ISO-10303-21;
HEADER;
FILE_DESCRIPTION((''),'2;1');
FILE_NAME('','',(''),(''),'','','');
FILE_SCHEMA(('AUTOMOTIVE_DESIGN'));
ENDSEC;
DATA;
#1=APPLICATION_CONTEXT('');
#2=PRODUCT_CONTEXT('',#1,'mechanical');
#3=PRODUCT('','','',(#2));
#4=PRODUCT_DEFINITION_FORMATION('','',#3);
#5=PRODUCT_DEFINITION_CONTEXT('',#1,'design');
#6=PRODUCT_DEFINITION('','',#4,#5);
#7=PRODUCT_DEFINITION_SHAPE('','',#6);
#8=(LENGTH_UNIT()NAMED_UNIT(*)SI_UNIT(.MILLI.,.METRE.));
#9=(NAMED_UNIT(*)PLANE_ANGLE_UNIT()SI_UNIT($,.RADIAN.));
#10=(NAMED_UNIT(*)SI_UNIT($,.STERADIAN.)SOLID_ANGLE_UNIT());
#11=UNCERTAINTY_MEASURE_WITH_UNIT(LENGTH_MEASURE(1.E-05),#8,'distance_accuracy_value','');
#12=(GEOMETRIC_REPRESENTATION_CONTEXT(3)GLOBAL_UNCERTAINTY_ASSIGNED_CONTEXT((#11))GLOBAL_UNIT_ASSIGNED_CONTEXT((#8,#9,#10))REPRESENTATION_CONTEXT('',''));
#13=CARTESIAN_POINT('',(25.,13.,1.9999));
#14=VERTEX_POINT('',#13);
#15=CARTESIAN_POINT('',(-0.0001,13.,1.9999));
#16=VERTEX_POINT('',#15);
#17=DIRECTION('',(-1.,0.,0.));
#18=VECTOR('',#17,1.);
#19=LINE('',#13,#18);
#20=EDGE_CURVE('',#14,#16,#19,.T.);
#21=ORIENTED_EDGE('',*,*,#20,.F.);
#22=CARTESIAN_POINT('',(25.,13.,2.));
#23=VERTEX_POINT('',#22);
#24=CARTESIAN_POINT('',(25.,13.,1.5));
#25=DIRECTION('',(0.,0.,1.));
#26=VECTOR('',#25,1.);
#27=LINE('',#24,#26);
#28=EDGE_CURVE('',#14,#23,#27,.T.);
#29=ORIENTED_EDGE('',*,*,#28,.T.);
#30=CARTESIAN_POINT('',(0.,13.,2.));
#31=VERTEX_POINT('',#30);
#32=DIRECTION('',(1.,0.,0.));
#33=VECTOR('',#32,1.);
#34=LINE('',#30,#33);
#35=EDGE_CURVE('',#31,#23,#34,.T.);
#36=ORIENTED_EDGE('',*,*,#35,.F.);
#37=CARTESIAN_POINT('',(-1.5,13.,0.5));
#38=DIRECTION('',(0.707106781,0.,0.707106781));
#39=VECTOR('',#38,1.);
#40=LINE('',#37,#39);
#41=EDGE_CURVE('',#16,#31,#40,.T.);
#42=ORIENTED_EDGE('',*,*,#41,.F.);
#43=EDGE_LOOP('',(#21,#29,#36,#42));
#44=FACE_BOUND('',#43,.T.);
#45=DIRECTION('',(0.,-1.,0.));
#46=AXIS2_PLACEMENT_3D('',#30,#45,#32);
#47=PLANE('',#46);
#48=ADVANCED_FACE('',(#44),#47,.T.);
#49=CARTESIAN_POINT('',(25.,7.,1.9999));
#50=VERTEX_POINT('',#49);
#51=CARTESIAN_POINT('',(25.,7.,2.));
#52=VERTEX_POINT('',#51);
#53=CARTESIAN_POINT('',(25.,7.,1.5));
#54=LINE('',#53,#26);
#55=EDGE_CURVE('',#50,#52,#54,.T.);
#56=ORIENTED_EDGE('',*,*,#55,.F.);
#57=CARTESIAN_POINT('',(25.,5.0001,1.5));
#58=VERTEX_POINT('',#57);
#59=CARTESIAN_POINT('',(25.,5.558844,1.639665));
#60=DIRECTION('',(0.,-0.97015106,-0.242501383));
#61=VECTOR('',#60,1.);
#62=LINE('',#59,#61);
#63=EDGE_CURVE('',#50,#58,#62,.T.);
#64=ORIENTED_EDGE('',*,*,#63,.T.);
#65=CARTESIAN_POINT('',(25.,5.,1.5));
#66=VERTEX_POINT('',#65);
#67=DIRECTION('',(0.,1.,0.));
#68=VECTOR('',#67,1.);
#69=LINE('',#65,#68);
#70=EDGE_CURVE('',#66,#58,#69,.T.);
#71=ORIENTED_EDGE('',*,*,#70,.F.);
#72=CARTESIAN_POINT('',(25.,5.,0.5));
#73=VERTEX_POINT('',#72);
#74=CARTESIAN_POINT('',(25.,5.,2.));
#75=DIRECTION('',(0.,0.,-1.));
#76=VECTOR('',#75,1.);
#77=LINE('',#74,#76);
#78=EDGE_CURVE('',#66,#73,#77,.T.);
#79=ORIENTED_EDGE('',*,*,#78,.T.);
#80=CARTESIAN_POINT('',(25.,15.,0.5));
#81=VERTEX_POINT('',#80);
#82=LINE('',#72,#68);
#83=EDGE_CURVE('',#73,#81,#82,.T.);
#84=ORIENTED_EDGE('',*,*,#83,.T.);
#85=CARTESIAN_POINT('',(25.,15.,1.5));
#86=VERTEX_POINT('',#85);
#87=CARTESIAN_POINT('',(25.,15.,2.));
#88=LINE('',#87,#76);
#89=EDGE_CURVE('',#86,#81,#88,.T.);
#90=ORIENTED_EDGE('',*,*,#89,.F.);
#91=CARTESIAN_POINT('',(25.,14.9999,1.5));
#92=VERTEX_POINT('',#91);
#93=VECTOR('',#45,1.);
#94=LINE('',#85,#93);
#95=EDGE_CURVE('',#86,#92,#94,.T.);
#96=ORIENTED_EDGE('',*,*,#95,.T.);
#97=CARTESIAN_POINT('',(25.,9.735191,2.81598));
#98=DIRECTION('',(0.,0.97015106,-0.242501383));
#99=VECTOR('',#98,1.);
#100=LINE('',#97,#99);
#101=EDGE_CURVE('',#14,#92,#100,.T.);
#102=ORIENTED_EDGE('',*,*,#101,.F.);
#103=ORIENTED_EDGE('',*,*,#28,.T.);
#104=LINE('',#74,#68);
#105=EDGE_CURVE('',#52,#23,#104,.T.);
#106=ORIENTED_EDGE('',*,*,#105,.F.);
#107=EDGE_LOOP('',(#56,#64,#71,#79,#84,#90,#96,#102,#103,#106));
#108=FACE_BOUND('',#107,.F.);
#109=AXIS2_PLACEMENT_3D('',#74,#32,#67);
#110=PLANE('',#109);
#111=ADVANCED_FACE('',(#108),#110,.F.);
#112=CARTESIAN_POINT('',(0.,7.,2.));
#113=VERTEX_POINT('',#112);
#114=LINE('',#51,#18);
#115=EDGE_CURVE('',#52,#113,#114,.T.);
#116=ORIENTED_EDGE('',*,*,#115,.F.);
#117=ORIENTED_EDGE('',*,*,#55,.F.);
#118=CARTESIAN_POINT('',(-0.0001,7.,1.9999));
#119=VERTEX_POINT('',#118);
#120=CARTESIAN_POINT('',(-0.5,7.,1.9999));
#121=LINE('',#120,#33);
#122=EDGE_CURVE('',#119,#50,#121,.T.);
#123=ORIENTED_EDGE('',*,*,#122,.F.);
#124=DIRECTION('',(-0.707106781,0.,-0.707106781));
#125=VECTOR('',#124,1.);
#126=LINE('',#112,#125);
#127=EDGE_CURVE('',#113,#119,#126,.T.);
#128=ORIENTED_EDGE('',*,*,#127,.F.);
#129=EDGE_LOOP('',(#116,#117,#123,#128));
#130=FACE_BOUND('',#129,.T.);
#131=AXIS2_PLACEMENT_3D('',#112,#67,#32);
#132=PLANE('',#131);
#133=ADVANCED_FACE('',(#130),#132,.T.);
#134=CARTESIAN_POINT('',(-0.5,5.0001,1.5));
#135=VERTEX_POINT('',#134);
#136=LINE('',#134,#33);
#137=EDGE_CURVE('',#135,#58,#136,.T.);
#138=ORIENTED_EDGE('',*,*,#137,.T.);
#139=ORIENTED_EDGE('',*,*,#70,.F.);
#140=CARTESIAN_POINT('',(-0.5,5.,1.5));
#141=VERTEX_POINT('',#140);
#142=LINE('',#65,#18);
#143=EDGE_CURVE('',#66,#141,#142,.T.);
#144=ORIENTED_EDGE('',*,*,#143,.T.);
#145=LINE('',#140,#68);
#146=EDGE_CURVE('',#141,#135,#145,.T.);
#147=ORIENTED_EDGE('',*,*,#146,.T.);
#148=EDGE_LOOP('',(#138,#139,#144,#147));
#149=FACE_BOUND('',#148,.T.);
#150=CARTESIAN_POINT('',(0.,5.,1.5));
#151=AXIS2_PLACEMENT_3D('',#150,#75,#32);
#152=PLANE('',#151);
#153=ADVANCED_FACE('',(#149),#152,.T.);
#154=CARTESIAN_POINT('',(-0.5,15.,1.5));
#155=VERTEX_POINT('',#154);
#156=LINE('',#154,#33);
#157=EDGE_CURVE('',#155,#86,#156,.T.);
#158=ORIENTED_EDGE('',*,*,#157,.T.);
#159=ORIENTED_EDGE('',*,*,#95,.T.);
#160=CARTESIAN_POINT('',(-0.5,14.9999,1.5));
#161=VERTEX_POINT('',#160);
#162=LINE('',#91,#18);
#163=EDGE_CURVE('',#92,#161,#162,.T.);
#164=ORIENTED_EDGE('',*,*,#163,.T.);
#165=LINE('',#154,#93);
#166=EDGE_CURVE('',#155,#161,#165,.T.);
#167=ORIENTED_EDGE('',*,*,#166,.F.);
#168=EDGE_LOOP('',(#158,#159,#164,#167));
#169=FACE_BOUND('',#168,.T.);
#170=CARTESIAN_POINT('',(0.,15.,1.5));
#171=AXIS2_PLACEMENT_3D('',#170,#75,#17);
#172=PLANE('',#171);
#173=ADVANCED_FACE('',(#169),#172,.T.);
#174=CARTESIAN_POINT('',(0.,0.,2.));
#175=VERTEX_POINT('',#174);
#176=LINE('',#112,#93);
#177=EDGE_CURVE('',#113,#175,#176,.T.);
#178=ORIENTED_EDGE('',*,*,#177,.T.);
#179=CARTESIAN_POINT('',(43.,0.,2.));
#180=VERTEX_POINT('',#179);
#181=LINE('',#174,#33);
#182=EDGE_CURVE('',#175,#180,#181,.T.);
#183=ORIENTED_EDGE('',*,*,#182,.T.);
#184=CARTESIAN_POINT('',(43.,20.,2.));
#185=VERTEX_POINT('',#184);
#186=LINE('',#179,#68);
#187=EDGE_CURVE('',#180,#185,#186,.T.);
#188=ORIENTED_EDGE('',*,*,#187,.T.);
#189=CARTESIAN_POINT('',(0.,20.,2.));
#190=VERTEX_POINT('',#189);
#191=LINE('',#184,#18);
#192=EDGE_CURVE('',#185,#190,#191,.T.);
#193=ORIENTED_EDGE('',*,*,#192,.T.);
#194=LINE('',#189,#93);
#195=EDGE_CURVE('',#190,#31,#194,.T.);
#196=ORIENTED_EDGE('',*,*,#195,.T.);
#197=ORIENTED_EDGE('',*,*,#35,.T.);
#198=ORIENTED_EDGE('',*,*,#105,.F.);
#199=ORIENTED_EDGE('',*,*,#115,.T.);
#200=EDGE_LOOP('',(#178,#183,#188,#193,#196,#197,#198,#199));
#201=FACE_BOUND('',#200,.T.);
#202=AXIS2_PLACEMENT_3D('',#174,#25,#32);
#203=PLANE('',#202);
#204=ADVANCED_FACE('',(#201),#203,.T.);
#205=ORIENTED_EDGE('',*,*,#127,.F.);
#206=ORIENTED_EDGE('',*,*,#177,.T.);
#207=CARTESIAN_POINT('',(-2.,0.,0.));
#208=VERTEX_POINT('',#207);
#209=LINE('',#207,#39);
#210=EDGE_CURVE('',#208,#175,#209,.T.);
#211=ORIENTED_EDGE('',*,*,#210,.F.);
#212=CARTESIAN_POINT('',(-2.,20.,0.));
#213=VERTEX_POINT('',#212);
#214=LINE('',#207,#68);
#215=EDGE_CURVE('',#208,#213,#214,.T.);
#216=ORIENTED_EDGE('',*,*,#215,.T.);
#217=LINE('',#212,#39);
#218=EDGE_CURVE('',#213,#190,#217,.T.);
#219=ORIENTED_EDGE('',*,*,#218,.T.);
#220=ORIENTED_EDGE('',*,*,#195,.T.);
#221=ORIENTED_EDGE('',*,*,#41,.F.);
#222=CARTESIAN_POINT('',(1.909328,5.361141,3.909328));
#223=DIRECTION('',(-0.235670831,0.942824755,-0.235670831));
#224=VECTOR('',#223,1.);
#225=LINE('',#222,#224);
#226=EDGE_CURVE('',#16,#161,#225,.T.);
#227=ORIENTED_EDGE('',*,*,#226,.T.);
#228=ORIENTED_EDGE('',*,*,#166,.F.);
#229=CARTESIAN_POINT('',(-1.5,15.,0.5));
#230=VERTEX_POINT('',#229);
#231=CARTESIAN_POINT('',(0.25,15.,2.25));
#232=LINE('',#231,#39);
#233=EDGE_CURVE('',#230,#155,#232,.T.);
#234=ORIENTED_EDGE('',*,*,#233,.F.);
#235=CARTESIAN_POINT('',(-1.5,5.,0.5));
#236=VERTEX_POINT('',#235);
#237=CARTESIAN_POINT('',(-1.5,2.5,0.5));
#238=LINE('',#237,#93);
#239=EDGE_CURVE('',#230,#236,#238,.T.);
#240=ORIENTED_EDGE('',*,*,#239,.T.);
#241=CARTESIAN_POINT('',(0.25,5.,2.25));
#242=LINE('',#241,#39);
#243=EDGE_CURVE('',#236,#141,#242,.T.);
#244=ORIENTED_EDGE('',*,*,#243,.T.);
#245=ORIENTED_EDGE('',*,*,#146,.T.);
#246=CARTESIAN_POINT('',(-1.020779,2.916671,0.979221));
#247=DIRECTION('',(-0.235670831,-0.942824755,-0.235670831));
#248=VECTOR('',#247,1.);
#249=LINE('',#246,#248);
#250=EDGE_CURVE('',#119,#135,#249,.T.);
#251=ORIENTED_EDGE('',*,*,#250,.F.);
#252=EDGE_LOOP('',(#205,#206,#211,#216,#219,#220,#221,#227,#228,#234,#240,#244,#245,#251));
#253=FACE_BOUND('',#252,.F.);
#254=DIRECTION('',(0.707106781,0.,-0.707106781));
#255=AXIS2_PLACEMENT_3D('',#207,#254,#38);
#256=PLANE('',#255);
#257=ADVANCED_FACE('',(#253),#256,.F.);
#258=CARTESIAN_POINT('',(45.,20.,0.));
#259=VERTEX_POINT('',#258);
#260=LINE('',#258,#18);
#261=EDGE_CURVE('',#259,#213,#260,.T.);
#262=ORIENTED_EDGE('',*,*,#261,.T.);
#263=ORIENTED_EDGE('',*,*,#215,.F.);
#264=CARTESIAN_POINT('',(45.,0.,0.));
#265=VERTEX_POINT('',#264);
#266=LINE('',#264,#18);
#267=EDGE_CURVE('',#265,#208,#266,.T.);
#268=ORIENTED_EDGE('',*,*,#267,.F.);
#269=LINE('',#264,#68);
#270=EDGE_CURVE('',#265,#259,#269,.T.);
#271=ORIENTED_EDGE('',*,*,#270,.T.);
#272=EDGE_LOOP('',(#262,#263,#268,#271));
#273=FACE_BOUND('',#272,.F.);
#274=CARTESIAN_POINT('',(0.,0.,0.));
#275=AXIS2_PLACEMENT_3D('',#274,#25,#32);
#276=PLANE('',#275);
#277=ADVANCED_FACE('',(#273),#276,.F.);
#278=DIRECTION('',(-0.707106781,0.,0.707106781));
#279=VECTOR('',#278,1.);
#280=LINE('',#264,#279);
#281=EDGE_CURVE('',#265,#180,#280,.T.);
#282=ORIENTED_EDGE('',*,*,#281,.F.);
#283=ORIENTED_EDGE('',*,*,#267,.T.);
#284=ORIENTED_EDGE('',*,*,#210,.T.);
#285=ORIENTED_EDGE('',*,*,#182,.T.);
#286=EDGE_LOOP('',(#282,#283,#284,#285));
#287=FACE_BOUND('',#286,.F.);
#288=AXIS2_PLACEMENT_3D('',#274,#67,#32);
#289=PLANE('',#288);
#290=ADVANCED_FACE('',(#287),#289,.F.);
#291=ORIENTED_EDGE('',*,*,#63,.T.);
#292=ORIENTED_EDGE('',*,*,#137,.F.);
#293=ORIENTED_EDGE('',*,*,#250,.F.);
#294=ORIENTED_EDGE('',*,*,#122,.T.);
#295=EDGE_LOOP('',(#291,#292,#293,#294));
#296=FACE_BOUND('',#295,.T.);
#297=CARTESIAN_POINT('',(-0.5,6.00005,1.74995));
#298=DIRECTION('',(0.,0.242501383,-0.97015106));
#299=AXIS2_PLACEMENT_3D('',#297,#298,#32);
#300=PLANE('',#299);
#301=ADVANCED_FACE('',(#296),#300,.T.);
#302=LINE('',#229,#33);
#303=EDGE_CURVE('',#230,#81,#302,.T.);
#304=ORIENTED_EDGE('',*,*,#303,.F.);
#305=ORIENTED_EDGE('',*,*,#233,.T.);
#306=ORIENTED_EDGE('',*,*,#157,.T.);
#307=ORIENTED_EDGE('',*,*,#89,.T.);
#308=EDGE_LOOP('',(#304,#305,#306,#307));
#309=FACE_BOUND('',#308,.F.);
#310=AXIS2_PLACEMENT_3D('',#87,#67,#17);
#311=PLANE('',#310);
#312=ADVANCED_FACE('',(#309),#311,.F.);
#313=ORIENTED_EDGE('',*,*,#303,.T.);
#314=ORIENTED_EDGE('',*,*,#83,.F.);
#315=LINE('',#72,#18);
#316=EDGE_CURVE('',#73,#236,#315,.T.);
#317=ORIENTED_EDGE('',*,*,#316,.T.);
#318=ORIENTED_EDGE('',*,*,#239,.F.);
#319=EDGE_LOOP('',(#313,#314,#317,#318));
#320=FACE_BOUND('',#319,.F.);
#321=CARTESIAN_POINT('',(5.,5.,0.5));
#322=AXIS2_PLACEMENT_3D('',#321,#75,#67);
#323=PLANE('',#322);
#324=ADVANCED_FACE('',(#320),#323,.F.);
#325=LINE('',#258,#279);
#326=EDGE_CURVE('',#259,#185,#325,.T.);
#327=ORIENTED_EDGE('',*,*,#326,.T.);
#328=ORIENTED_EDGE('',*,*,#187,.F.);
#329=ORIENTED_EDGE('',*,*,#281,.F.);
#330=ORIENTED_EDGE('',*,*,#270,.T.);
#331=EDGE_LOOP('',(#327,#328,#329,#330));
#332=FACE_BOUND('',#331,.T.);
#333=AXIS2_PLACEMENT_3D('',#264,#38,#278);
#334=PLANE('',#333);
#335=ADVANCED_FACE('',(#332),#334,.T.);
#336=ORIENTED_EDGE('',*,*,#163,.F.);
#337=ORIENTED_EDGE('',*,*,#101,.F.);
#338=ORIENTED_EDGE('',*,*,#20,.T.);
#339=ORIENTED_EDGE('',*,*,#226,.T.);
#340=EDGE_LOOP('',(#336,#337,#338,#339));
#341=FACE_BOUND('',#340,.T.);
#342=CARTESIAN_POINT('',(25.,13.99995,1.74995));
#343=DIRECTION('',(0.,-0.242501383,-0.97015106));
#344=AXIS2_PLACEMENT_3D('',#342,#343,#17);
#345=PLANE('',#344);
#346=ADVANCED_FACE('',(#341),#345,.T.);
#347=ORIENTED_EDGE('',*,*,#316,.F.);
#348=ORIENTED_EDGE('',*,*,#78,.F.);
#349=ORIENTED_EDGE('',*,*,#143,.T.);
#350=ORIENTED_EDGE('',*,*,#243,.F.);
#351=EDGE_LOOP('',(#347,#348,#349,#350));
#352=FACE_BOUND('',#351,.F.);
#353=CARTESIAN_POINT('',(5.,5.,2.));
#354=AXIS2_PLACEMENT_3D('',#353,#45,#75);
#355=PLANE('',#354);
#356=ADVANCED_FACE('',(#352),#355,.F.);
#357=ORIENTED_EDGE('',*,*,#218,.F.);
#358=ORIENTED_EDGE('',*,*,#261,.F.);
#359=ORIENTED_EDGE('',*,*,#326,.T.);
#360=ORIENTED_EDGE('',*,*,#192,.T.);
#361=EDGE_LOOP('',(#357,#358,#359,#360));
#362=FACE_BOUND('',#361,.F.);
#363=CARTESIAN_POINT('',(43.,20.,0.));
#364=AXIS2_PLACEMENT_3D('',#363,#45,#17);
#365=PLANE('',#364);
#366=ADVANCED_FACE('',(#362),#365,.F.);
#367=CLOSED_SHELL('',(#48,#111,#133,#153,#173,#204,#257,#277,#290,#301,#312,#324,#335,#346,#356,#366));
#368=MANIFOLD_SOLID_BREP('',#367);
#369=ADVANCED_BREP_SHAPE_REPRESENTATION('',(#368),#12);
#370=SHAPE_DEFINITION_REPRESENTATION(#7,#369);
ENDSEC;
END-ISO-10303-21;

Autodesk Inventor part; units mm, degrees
ref_plane "YZ Plane" through (0, 0, 0) normal (1, 0, 0) x (0, 1, 0)
ref_plane "XZ Plane" through (0, 0, 0) normal (0, 1, 0) x (-1, 0, 0)
ref_plane "XY Plane" through (0, 0, 0) normal (0, 0, 1) x (1, 0, 0)
sketch "Sketch1" plane through (0, 0, 0) normal (0, 0, 1) x (1, 0, 0)
  line L0 (0, 0) -> (43, 0)
  line L1 (43, 0) -> (43, 20)
  line L2 (43, 20) -> (0, 20)
  line L3 (0, 20) -> (0, 0)
  dimension "d0" = 43
  dimension "d1" = 20
extrude "Extrusion1" add sketch "Sketch1" along normal blind 2
sketch "Sketch2" plane through (0, 0, 0) normal (0, -1, 0) x (1, 0, 0)
  line L0 (43, 0) -> (43, 2) projected
  line L1 (0, 0) -> (0, 2) projected
  line L2 (0, 0) -> (-2, 0)
  line L3 (-2, 0) -> (0, 2)
  line L4 (43, 0) -> (45, 0)
  line L5 (45, 0) -> (43, 2)
  dimension "d4" = 2
  dimension "d5" = 2
extrude "Extrusion2" add sketch "Sketch2" against normal blind 20
sketch "Sketch5" plane through (0, 0, 2) normal (0, 0, 1) x (1, 0, 0)
  line L0 (0, 0) -> (43, 0) projected
  line L1 (43, 20) -> (0, 20) projected
  line L2 (0, 20) -> (0, 0) projected
  line L3 (5, 5) -> (25, 5)
  line L4 (25, 5) -> (25, 15)
  line L5 (25, 15) -> (5, 15)
  line L6 (5, 15) -> (5, 5)
  dimension "d26" = 20
  dimension "d27" = 10
  dimension "d28" = 5
  dimension "d29" = 5
  dimension "d30" = 5
extrude "Extrusion5" cut sketch "Sketch5" against normal blind 1.5
sketch "Sketch6" plane through (5, 5, 2) normal (1, 0, 0) x (0, 0, -1)
  line L0 (0, 0) -> (0, 10) projected
  line L1 (0, 0) -> (1.5, 0) projected
  line L2 (1.5, 0) -> (1.5, 10) projected
  line L3 (0, 10) -> (1.5, 10) projected
  point P0 (2, -5)
extrude "Extrusion6" cut sketch "Sketch6" against normal up to next
sketch "Sketch7" plane through (0, 15, 2) normal (0, -1, 0) x (1, 0, 0)
  line L0 (0, 0) -> (25, 0) projected
  line L1 (-1.5, -1.5) -> (0, 0) projected
  line L2 (25, 0) -> (0, 0)
  line L3 (0, 0) -> (0, -0.5)
  line L4 (0, -0.5) -> (25, -0.5)
  line L5 (25, -0.5) -> (25, 0)
  line L6 (0, -0.5) -> (-0.5, -0.5)
  line L7 (0, 0) -> (-0.5, -0.5)
  point P0 (0, -2)
  dimension "d35" = 0.5
extrude "Extrusion7" add sketch "Sketch7" along normal blind 2
sketch "Sketch8" plane through (0, 5, 2) normal (0, 1, 0) x (1, 0, 0)
  line L0 (0, 0) -> (-1.5, 1.5) projected
  line L1 (25, 0) -> (0, 0)
  line L2 (0, 0) -> (0, 0.5)
  line L3 (0, 0.5) -> (25, 0.5)
  line L4 (25, 0.5) -> (25, 0)
  line L5 (0, 0.5) -> (-0.5, 0.5)
  line L6 (0, 0) -> (-0.5, 0.5)
  point P0 (0, 2)
  dimension "d38" = 25
  dimension "d39" = 0.5
extrude "Extrusion8" add sketch "Sketch8" along normal blind 2
chamfer "Chamfer1" distance 0.5 distance2 2 1 edges at (12.25, 7, 1.5) measured on face at (8.1667, 7, 1.6667)
chamfer "Chamfer2" distance 0.5 distance2 2 1 edges at (12.25, 13, 1.5) measured on face at (8.1667, 13, 1.6667)
properties part number "deksel token Edited"
